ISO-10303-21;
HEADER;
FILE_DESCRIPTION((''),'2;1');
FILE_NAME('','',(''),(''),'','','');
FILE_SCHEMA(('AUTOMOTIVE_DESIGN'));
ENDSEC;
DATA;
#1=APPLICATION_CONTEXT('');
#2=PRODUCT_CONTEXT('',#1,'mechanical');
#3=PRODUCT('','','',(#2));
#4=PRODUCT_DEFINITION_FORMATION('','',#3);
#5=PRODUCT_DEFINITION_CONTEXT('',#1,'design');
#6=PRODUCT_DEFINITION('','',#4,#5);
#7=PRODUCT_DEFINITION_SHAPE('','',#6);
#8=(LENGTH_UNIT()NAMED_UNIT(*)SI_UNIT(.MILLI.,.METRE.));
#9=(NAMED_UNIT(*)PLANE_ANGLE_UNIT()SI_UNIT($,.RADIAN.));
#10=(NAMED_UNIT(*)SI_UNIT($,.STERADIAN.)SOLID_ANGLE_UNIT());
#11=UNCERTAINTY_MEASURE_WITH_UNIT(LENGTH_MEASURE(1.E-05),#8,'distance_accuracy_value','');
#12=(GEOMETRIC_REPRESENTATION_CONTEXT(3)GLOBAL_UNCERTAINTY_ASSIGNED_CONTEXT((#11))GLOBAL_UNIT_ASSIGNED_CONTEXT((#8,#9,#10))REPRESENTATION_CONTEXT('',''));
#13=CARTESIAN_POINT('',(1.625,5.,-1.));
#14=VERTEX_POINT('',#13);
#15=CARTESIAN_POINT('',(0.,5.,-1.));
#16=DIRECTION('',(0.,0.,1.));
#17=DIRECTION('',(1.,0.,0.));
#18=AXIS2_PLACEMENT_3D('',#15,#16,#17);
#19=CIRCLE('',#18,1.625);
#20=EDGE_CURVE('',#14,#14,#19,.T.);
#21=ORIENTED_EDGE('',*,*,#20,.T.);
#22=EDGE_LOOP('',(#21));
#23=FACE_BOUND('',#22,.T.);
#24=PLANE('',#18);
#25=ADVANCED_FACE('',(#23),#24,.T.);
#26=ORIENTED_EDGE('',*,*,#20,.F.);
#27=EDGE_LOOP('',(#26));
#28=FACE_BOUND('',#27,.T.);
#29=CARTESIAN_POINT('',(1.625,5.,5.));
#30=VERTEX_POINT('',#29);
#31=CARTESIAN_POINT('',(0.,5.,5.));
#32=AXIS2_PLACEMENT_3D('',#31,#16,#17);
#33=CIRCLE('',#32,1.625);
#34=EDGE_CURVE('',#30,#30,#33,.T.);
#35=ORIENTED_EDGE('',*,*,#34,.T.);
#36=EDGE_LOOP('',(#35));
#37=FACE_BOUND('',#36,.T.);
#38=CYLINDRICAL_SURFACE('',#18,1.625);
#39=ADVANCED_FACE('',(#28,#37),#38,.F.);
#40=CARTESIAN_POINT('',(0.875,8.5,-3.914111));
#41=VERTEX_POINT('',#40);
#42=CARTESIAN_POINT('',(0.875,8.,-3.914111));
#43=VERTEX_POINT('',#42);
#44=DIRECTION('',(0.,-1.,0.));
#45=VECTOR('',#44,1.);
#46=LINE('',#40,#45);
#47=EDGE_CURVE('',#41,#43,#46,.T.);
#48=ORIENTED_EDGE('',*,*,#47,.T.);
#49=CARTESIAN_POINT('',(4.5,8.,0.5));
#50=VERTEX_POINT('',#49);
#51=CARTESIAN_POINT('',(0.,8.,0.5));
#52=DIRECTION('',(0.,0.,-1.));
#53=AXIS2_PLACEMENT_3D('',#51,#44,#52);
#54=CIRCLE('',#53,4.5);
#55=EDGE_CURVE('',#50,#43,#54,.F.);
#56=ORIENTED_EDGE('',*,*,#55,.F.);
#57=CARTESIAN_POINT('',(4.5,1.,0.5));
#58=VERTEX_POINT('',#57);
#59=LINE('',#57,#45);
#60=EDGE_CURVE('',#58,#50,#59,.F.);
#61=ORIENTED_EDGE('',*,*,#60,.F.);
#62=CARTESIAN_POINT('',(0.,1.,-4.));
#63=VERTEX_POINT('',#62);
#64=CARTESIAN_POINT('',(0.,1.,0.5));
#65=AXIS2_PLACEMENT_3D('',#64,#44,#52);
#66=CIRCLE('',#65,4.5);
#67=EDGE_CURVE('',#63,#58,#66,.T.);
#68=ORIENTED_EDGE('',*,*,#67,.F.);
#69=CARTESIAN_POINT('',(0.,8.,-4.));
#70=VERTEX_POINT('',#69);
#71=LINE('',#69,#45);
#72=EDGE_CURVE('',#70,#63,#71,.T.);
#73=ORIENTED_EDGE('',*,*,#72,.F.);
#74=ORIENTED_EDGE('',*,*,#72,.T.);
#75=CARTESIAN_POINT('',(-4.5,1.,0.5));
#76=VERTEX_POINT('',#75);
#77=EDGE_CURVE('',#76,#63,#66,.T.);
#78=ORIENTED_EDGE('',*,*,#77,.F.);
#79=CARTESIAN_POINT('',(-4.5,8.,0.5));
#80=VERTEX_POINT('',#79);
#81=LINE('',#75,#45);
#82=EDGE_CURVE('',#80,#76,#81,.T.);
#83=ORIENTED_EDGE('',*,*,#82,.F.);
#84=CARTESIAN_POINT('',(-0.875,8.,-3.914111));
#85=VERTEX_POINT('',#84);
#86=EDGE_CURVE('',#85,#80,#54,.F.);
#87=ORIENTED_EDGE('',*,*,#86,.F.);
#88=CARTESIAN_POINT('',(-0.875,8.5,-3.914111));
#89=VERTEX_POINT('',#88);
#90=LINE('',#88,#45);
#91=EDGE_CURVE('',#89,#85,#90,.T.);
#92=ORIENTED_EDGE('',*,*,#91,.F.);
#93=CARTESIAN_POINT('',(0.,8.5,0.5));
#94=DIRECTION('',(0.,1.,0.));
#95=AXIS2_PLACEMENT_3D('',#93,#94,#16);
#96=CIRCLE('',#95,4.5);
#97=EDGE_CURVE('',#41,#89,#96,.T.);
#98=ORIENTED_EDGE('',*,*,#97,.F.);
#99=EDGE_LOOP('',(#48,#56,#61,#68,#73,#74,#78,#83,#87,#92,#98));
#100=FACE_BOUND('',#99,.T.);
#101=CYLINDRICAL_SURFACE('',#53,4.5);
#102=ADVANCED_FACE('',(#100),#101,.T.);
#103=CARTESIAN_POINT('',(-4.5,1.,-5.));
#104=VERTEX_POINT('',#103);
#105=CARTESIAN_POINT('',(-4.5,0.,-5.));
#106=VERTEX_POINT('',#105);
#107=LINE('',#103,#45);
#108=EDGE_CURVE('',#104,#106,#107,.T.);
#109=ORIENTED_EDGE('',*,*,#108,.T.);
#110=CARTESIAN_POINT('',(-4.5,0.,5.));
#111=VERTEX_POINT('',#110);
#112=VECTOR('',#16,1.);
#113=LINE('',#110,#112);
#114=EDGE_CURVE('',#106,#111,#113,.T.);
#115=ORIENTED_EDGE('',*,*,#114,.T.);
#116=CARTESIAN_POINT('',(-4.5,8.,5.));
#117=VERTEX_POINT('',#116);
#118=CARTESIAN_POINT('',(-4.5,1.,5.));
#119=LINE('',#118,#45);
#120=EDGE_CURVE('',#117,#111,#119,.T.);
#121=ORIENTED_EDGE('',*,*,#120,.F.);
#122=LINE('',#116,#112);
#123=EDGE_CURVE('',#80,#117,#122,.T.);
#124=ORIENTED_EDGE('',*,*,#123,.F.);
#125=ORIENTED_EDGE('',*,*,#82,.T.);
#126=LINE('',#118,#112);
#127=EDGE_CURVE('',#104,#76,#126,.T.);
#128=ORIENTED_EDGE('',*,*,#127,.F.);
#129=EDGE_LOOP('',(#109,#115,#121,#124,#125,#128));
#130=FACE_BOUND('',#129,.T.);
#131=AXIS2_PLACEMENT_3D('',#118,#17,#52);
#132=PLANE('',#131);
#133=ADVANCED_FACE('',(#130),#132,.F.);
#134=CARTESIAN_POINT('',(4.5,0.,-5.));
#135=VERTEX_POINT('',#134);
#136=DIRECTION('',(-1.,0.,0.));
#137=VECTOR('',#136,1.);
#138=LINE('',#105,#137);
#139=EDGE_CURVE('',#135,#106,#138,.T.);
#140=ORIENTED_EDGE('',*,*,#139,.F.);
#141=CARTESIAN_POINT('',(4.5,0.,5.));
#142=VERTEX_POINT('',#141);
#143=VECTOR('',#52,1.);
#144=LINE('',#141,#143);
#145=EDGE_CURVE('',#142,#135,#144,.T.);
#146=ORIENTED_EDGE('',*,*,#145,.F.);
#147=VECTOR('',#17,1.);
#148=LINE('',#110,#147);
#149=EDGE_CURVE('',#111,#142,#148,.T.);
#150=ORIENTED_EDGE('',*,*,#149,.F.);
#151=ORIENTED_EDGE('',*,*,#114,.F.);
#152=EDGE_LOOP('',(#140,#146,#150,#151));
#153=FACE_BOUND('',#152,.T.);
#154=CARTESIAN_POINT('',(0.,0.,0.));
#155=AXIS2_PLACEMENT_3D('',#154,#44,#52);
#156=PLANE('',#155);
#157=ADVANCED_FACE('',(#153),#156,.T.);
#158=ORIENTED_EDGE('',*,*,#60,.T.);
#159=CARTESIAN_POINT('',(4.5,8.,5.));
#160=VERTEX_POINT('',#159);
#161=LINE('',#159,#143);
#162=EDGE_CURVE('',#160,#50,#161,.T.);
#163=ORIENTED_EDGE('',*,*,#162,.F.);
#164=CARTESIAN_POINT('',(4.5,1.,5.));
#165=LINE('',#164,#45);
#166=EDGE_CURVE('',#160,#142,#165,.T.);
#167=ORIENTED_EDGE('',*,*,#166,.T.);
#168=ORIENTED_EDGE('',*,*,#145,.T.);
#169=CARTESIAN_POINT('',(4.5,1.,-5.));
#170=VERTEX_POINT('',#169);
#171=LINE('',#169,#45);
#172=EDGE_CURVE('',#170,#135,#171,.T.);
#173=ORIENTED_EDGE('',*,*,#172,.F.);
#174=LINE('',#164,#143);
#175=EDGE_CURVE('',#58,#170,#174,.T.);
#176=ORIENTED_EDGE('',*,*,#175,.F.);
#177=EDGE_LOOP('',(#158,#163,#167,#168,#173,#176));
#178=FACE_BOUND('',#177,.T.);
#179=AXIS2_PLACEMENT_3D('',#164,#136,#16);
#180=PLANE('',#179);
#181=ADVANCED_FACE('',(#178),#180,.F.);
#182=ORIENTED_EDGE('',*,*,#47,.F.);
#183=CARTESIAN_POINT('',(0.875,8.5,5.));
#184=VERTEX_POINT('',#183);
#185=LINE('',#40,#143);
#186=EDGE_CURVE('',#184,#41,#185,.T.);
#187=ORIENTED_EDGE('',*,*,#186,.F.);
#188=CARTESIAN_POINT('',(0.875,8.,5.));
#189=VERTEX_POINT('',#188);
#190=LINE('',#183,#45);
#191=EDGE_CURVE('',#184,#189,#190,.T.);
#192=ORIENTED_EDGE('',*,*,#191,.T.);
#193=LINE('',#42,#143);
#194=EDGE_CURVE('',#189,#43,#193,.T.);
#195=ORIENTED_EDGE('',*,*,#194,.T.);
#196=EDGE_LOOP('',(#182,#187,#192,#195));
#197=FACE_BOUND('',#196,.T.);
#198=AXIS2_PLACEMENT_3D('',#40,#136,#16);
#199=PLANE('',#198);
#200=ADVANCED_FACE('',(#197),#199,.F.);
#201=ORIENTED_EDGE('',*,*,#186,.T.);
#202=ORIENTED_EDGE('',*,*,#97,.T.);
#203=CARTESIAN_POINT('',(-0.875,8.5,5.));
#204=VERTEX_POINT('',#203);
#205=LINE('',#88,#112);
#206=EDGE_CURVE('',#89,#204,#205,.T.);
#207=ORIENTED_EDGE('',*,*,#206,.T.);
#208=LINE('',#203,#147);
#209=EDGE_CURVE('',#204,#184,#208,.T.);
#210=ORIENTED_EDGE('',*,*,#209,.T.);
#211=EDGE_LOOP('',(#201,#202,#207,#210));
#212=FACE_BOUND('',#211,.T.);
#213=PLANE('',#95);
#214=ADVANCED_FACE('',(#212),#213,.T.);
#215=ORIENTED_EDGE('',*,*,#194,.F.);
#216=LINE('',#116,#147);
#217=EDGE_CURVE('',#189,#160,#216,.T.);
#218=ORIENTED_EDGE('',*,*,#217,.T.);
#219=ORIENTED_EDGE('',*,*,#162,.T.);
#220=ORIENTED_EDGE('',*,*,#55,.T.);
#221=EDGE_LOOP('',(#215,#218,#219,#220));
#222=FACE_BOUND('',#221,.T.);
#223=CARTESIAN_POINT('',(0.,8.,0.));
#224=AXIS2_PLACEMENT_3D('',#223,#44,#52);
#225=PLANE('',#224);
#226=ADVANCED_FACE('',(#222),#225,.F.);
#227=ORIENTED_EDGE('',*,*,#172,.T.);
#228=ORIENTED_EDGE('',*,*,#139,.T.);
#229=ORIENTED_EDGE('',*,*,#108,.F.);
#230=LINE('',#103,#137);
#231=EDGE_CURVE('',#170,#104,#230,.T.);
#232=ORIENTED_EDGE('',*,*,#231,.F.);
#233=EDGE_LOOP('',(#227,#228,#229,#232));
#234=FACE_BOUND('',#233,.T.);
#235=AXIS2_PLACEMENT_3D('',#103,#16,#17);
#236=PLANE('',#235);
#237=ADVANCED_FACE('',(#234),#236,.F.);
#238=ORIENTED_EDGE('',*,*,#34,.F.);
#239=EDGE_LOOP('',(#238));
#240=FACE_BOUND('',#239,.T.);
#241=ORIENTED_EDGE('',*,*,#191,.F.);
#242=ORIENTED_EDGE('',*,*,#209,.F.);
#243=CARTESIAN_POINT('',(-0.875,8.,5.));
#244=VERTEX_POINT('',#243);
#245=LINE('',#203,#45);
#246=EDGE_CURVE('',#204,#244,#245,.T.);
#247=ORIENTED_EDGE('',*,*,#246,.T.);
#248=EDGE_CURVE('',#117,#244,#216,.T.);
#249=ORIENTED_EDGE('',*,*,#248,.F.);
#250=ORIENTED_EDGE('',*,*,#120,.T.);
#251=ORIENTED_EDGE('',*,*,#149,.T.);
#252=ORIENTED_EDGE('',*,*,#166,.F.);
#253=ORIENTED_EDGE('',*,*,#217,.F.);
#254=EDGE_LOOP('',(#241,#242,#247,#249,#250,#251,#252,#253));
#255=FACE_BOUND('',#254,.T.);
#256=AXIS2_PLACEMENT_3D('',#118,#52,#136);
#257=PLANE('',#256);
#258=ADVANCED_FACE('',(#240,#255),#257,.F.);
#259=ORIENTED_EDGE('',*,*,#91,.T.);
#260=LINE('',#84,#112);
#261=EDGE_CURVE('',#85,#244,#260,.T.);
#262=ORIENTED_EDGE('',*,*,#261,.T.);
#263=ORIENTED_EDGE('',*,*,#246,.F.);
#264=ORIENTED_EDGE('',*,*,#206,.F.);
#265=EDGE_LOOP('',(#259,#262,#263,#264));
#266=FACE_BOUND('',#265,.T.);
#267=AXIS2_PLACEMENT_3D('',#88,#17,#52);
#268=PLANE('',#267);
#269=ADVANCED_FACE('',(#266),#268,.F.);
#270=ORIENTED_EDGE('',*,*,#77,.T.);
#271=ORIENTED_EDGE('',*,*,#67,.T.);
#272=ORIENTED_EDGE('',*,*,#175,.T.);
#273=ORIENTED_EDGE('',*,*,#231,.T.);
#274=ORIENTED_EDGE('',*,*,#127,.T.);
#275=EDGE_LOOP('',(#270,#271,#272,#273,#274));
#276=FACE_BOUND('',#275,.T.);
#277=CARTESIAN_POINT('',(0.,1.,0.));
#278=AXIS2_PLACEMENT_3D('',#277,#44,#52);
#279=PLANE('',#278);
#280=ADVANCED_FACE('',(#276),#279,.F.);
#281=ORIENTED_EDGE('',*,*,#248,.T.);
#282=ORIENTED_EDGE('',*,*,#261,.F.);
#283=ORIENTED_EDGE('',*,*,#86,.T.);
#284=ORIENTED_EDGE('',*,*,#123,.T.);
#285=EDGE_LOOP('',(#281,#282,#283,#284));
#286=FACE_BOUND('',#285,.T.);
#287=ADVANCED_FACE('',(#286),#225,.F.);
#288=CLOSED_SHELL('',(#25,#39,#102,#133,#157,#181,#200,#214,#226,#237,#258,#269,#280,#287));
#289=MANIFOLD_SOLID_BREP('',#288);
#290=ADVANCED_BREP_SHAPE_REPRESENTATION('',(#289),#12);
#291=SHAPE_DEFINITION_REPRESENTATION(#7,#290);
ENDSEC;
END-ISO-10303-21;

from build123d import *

# Parameters (mm, degrees)
SKETCH1_W           = 9
SKETCH1_H           = 10
BOSS_EXTRUDE1_DEPTH = 1
SKETCH2_W           = 9
SKETCH2_H           = 9
BOSS_EXTRUDE2_DEPTH = 7
FILLET1_R           = 4.5
BOSS_EXTRUDE3_DEPTH = 0.5
SKETCH4_R           = 1.625
CUT_EXTRUDE1_DEPTH  = 6


with BuildPart() as part:
    # Sketch1 → Boss-Extrude1 (new body)
    with BuildSketch(Plane(origin=(0, 0, 0), x_dir=(1, 0, 0), z_dir=(0, 1, 0))):
        Rectangle(SKETCH1_W, SKETCH1_H)
    extrude(amount=BOSS_EXTRUDE1_DEPTH)

    # Sketch2 → Boss-Extrude2 (add)
    with BuildSketch(Plane(origin=(0, 1, 0), x_dir=(1, 0, 0), z_dir=(0, 1, 0))):
        with Locations((0, -0.5)):
            Rectangle(SKETCH2_W, SKETCH2_H)
    extrude(amount=BOSS_EXTRUDE2_DEPTH)

    # Fillet1
    fillet1_edges = [part.edges().sort_by_distance(p)[0] for p in [
        (-4.5, 4.5, -4),
        (4.5, 4.5, -4),
    ]]
    fillet(fillet1_edges, radius=FILLET1_R - 0.0001)  # a hair under: the kernel refuses the full size

    # Sketch3 → Boss-Extrude3 (add)
    with BuildSketch(Plane(origin=(0, 8, 0), x_dir=(1, 0, 0), z_dir=(0, 1, 0))):
        with BuildLine():
            Line((-0.875, 3.914110896), (-0.875, -5))
            Line((-0.875, -5), (0.875, -5))
            Line((0.875, -5), (0.875, 3.914110896))
            ThreePointArc((0.875, 3.914110896), (0.439602644, 3.978476249), (0, 4))
            ThreePointArc((0, 4), (-0.439602644, 3.978476249), (-0.875, 3.914110896))
        make_face()
    extrude(amount=BOSS_EXTRUDE3_DEPTH)

    # Sketch4 → Cut-Extrude1 (cut)
    with BuildSketch(Plane.XY.offset(5)):
        with Locations((0, 5)):
            Circle(SKETCH4_R)
    extrude(amount=-CUT_EXTRUDE1_DEPTH, mode=Mode.SUBTRACT)


solid = part.part
